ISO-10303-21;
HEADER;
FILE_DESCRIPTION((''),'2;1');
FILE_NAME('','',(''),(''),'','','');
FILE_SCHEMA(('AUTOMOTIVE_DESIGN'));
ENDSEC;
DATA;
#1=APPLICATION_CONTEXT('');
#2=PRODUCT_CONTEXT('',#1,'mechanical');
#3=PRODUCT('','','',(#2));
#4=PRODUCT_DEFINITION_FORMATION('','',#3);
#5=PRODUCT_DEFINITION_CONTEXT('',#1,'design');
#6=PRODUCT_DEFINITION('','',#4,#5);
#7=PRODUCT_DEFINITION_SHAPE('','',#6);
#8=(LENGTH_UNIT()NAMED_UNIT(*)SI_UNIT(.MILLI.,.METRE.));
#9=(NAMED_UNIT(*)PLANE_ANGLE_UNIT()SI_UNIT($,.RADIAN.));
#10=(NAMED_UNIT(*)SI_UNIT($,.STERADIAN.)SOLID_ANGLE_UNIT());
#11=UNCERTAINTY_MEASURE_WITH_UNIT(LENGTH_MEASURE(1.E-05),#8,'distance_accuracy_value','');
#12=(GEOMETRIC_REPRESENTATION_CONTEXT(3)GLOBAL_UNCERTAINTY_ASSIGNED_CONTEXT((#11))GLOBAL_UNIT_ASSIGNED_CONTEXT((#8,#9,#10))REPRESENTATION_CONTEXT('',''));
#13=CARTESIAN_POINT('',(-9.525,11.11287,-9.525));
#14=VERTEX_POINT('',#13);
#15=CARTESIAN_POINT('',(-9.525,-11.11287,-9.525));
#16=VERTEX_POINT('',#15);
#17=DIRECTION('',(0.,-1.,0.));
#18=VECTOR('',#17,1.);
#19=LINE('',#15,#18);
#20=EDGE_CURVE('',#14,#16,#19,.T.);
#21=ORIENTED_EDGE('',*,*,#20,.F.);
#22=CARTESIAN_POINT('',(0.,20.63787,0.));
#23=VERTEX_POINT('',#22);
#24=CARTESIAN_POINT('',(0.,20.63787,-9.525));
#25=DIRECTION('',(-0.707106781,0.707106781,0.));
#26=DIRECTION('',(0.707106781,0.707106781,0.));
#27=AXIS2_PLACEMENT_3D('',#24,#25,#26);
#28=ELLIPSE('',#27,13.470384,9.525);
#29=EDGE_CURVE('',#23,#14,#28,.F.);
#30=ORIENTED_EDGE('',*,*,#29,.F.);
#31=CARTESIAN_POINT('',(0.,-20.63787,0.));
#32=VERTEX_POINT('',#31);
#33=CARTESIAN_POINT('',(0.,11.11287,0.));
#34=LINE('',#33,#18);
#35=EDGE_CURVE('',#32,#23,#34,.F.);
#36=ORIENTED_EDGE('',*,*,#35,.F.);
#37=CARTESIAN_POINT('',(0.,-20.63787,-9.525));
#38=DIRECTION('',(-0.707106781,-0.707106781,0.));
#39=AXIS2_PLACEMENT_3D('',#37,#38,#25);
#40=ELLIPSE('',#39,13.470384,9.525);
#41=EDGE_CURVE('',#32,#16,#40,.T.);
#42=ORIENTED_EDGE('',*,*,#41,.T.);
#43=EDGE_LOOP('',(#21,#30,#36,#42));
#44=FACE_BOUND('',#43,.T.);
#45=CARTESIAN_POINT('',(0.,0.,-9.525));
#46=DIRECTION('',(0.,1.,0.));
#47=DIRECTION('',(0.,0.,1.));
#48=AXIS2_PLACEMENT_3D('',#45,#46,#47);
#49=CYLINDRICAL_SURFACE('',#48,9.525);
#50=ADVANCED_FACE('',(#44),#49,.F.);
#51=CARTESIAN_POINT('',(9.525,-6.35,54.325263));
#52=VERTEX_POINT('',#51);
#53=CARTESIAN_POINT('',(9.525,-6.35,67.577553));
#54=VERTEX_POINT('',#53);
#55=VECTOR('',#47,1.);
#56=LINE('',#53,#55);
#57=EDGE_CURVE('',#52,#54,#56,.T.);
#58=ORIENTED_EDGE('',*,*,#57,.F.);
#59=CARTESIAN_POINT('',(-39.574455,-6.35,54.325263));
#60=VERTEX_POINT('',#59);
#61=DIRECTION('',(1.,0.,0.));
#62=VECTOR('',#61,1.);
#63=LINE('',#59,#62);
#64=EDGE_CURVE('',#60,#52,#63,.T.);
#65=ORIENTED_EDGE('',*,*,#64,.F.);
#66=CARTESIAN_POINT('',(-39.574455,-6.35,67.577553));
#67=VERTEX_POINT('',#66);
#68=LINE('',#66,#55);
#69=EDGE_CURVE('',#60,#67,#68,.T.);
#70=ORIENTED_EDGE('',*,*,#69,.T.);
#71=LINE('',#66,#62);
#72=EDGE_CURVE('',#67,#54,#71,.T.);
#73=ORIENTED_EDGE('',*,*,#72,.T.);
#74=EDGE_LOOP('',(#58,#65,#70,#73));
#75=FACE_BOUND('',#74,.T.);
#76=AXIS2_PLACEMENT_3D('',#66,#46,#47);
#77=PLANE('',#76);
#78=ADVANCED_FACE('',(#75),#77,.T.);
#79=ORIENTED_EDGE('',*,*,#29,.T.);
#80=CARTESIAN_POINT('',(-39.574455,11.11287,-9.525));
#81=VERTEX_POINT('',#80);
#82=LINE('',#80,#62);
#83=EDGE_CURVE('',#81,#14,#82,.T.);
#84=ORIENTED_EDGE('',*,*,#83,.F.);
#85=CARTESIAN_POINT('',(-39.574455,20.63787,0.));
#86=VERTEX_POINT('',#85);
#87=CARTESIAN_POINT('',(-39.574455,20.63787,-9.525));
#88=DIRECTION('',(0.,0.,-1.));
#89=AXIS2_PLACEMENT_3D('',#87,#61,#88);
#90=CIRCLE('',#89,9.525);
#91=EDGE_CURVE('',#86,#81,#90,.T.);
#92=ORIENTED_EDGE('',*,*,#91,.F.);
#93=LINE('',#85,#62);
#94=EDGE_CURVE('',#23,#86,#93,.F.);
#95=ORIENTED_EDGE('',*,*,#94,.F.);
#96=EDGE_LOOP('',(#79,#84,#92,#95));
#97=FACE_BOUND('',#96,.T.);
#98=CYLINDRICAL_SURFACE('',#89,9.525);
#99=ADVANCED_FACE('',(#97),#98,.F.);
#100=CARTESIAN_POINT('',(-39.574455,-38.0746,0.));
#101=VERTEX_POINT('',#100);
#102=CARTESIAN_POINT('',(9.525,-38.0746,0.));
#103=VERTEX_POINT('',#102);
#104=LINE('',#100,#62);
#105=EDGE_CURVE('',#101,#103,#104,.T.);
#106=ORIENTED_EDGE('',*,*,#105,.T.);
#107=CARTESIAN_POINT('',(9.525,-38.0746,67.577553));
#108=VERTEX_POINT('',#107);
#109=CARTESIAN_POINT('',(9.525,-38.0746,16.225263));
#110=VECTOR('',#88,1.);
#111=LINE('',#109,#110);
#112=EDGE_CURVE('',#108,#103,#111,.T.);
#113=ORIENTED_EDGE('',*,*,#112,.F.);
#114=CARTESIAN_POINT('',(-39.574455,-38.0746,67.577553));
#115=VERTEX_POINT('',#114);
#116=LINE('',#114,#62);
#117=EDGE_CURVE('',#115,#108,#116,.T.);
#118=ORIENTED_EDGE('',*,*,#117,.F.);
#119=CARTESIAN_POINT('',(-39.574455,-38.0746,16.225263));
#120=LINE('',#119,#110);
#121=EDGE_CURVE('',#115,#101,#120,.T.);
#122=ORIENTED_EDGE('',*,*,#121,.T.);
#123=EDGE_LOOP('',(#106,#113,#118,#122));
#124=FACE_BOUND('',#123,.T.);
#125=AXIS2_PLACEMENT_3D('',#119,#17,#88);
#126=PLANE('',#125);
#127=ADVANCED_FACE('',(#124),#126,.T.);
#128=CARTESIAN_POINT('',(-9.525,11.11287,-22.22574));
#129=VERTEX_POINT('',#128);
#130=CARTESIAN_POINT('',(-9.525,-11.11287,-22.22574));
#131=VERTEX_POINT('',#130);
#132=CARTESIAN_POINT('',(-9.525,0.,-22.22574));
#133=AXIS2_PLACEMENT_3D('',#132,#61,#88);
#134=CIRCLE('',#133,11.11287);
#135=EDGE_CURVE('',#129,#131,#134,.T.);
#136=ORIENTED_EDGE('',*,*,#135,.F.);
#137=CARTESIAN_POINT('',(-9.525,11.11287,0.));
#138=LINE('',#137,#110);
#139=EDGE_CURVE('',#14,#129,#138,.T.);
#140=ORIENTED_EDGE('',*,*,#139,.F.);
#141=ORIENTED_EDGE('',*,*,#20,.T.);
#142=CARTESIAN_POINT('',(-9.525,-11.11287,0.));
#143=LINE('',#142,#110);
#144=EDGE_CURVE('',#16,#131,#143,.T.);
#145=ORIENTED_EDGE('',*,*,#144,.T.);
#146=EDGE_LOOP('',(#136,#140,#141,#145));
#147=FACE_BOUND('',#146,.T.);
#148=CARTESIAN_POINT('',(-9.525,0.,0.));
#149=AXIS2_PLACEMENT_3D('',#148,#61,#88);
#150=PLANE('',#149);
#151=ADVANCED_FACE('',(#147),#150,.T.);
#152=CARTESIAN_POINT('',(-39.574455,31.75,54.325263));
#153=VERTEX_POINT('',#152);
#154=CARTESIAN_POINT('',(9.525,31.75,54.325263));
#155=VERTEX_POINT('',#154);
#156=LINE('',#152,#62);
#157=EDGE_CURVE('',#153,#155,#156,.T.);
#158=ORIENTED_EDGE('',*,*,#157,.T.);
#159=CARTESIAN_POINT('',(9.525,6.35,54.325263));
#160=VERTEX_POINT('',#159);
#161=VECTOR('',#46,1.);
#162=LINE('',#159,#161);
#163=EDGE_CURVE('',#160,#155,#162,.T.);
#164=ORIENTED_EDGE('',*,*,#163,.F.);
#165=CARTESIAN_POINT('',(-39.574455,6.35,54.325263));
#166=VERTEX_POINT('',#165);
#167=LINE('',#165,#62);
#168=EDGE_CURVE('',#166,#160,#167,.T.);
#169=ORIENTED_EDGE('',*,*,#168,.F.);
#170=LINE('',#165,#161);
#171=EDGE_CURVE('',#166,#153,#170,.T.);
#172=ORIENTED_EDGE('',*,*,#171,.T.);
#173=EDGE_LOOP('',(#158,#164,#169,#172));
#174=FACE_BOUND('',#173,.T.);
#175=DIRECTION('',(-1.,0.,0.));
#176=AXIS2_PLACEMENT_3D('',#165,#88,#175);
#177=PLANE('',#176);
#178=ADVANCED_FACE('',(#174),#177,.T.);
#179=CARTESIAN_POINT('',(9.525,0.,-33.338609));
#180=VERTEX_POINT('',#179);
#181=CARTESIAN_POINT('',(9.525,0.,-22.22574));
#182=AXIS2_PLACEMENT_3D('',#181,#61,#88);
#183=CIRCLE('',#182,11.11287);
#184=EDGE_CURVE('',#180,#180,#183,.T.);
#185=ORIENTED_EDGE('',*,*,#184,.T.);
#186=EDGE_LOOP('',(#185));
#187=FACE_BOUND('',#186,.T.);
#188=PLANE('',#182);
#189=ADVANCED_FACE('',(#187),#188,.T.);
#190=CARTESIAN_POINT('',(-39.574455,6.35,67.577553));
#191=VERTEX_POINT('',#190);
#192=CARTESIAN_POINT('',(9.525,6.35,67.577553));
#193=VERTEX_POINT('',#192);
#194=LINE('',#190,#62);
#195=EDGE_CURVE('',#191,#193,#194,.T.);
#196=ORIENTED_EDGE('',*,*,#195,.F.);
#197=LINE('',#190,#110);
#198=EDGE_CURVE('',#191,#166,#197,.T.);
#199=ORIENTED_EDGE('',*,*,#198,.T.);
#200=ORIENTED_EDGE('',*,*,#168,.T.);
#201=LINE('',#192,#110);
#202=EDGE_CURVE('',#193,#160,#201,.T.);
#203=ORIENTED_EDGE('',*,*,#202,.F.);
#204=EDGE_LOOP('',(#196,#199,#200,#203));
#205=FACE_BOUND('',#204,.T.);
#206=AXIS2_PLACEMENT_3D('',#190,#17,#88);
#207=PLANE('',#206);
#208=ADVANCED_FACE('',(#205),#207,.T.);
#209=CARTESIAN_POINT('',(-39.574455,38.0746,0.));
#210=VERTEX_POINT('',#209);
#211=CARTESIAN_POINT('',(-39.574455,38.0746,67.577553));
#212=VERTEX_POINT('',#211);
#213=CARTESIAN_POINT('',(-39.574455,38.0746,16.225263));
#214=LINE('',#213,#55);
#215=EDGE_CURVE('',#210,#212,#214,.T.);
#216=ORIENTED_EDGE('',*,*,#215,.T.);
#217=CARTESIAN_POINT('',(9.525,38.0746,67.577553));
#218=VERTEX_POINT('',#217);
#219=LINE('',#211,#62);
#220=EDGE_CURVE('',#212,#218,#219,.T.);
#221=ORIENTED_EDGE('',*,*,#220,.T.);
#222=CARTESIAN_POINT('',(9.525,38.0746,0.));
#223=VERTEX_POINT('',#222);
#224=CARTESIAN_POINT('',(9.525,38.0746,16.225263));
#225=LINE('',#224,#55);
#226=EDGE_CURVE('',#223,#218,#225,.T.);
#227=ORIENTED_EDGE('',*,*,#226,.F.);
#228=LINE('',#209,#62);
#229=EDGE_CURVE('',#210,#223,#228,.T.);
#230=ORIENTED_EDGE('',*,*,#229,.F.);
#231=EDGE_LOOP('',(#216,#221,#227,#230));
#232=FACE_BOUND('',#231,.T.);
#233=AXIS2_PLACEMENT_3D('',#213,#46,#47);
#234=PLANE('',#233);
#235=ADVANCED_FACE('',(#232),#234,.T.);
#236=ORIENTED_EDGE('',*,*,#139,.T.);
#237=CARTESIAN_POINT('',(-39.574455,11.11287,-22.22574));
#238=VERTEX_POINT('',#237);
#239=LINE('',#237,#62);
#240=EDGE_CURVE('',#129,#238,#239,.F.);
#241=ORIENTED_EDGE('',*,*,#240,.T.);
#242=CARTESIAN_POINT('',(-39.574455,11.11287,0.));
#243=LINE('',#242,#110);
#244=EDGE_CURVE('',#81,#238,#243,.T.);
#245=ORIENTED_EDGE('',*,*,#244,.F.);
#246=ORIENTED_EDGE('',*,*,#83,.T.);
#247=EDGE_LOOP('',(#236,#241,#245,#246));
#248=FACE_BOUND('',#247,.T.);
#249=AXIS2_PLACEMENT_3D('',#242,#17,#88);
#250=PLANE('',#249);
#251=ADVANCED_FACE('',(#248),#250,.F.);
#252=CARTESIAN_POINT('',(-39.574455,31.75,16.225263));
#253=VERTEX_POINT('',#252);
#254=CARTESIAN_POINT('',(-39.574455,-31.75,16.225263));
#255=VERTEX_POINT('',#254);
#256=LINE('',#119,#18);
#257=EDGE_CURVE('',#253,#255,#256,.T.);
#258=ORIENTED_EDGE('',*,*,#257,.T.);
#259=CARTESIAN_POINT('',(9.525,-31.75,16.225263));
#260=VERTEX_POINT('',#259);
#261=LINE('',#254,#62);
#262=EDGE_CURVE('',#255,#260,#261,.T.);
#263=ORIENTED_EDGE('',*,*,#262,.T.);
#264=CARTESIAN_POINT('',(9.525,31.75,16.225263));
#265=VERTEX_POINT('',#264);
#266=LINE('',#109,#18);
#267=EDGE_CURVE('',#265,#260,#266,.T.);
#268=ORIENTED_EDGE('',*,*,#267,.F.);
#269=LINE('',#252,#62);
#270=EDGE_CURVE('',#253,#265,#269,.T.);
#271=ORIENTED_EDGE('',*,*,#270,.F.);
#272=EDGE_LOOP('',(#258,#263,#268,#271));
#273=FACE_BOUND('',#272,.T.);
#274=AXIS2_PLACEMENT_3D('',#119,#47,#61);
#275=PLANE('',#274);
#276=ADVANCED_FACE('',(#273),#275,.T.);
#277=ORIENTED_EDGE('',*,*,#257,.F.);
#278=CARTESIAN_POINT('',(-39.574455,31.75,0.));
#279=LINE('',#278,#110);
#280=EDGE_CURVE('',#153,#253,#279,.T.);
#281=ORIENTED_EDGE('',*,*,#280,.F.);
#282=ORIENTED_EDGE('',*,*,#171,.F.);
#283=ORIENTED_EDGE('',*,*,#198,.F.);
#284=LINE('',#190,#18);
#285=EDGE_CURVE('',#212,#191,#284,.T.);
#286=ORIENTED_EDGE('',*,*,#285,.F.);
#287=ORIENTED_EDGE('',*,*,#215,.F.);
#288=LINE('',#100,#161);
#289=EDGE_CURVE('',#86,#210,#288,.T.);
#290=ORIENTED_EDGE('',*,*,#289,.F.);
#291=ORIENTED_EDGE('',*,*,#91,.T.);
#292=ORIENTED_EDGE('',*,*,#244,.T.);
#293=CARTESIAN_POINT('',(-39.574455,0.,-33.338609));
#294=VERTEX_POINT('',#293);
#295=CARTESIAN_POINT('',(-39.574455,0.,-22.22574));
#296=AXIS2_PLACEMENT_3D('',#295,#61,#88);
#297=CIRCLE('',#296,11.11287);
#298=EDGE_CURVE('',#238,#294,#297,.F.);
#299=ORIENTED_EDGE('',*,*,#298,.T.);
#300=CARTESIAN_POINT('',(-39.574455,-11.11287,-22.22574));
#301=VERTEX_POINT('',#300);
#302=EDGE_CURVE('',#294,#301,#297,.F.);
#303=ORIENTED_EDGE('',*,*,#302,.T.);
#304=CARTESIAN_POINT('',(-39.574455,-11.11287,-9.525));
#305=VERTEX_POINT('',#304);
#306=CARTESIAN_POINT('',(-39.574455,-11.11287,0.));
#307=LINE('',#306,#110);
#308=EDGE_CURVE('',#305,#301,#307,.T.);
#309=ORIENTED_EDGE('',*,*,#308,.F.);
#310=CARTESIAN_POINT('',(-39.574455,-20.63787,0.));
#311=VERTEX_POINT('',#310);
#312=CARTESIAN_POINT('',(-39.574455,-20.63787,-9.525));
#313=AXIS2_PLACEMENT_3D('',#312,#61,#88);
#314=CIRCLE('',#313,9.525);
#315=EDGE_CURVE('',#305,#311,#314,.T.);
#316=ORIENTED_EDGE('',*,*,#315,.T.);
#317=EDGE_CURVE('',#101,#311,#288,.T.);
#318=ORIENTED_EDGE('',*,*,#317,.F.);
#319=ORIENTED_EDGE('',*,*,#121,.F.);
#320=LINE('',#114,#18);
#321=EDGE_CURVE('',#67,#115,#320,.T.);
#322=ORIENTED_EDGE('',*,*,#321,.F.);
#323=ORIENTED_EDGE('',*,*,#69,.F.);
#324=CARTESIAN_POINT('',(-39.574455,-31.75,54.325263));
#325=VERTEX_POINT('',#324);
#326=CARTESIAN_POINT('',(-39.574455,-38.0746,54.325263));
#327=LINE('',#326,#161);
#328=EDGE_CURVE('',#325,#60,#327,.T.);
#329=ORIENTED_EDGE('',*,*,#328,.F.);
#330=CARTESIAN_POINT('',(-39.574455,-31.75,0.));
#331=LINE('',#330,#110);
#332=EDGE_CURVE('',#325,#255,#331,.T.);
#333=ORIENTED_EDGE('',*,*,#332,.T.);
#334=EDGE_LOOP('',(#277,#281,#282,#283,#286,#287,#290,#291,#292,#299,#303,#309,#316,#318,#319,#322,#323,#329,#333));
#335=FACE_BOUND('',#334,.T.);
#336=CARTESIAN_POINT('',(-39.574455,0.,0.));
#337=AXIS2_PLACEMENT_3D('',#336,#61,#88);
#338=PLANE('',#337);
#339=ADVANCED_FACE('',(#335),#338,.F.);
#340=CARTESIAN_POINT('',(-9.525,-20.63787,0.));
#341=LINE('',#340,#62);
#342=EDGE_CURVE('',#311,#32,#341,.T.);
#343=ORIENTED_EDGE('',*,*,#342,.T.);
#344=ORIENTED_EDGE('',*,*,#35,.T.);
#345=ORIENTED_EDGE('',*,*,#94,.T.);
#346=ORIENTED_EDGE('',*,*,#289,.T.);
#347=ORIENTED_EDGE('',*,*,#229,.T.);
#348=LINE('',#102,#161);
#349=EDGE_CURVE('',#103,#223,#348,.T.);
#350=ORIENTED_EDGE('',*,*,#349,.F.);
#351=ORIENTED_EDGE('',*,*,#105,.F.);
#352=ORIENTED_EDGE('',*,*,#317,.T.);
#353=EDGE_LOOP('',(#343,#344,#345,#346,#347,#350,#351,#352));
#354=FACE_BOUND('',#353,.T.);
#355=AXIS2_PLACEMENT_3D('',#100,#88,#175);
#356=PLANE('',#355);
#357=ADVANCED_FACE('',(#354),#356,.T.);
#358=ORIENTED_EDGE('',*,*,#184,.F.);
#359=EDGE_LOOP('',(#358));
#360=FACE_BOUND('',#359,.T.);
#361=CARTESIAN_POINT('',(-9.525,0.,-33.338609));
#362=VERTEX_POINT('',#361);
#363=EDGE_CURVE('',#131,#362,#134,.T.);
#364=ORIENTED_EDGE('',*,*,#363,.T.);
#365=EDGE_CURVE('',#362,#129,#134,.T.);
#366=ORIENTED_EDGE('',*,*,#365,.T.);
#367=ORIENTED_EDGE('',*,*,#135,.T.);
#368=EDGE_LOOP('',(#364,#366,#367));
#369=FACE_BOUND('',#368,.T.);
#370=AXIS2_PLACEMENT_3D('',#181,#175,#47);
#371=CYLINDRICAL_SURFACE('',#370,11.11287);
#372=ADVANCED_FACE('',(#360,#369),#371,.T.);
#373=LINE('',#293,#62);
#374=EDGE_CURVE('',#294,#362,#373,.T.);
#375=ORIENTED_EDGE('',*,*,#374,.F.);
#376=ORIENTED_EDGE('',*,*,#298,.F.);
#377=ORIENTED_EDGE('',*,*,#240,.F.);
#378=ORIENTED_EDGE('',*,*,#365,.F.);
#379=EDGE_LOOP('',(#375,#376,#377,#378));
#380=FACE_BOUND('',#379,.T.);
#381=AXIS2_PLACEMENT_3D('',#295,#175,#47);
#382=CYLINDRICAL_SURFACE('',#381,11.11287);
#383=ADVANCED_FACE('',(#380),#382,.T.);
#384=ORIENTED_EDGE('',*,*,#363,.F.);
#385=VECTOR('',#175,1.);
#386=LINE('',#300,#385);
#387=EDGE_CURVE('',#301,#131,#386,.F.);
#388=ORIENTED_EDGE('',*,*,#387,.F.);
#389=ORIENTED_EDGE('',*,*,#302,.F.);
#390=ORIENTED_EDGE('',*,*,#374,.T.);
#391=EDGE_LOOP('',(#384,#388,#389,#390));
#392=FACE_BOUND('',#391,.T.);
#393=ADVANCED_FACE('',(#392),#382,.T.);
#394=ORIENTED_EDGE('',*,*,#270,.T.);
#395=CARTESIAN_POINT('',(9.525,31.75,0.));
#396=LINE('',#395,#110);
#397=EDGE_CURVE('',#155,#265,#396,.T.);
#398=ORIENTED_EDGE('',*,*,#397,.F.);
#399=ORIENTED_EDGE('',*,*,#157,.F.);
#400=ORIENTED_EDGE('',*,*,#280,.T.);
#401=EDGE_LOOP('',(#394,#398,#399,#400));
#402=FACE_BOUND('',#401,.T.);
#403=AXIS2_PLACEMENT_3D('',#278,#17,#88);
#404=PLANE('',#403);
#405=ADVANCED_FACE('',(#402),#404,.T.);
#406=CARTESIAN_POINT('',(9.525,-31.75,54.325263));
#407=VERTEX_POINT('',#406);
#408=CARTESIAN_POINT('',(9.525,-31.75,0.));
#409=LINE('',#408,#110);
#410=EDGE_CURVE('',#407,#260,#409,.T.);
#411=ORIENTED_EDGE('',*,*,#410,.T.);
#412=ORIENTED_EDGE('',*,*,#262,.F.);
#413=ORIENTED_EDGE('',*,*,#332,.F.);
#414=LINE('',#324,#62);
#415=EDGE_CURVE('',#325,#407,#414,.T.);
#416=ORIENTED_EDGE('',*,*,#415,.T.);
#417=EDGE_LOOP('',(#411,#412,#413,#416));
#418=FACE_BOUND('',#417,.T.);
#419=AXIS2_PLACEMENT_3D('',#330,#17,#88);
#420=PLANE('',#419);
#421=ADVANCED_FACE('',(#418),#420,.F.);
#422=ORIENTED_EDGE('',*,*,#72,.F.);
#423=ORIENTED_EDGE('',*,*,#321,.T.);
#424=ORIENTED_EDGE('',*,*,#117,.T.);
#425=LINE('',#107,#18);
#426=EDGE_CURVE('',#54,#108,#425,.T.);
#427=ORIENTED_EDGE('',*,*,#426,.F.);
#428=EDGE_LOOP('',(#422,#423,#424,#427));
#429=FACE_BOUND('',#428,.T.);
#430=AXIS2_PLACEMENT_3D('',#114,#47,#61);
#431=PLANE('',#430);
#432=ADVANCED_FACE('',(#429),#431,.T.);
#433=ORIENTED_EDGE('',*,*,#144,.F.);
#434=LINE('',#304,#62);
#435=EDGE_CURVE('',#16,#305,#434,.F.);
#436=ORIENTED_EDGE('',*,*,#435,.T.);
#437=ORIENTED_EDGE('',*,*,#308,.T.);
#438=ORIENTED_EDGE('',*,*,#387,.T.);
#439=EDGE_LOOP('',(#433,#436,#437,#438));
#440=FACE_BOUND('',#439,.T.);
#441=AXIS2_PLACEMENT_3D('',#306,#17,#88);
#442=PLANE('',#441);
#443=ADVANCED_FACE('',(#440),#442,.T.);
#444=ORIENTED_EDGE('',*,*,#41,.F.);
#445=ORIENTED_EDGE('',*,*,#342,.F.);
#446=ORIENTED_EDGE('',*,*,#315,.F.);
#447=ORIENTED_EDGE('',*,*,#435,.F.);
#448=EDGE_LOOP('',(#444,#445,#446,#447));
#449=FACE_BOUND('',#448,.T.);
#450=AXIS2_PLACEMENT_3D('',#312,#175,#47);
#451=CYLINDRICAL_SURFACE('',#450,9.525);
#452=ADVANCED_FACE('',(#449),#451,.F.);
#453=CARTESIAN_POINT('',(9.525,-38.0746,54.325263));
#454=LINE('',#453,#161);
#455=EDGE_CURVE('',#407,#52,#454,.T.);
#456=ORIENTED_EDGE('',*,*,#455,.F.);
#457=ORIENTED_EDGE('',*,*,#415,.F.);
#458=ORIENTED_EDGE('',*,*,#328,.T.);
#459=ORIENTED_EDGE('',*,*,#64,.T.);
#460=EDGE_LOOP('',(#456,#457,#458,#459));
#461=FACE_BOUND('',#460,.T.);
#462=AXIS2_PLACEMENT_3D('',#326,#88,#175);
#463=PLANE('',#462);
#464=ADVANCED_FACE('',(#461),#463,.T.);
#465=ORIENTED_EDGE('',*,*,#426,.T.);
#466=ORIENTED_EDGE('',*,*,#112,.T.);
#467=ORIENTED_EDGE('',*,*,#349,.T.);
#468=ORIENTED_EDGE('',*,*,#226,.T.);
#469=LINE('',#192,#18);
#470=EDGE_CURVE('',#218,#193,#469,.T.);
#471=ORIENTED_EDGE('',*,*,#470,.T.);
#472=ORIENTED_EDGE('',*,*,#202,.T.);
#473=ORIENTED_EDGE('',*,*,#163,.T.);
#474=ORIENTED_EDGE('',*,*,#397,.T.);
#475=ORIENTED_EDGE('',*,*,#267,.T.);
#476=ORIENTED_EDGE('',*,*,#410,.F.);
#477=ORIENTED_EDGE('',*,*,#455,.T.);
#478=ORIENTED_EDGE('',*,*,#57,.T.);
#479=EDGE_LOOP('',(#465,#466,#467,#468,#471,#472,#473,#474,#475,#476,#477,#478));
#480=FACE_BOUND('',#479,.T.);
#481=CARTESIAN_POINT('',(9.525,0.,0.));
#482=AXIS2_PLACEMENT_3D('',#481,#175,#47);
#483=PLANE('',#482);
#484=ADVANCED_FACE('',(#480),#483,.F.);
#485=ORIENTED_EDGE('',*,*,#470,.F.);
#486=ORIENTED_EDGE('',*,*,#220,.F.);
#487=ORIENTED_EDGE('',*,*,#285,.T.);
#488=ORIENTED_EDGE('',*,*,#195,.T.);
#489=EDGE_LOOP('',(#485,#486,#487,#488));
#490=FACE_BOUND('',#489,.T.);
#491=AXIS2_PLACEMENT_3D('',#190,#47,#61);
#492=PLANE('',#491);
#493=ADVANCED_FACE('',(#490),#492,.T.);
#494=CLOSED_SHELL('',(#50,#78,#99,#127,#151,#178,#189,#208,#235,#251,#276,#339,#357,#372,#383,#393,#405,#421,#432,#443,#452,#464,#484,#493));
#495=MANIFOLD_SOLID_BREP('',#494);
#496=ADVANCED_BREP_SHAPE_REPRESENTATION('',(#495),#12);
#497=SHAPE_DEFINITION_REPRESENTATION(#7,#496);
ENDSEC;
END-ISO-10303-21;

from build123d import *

# Parameters (mm, degrees)
BASE_SKETCH_R      = 11.112869807
FEATURE_A_DEPTH    = 9.525
FEATURE_B_SKETCH_W = 22.225739614
FEATURE_B_SKETCH_H = 33.338609421
FEATURE_B_DEPTH    = 30.049455477
FILLET1_R          = 11.112869807
FILLET2_R          = 11.112869807
FEATURE_C_SKETCH_W = 76.1492
FEATURE_C_SKETCH_H = 16.225263269
FEATURE_C_DEPTH    = 49.099455477
FEATURE_D_SKETCH_W = 6.3246
FEATURE_D_SKETCH_H = 38.1
FEATURE_D_DEPTH    = 49.099455
FEATURE_E_SKETCH_W = 31.7246
FEATURE_E_SKETCH_H = 13.25229015
FEATURE_E_DEPTH    = 49.099455477
FILLET_BC_R        = 9.525


with BuildPart() as part:
    # Base Sketch → Feature A (new, symmetric)
    with BuildSketch(Plane.YZ):
        with Locations(Location((0, -22.225739614, 0), (0, 0, 90))):
            Circle(BASE_SKETCH_R)
    extrude(amount=FEATURE_A_DEPTH, both=True)

    # Feature B Sketch → Feature B (add)
    with BuildSketch(Plane(origin=(-9.525, 0, 0), x_dir=(0, -1, 0), z_dir=(-1, 0, 0))):
        with Locations((0, -16.669304711)):
            Rectangle(FEATURE_B_SKETCH_W, FEATURE_B_SKETCH_H)
    extrude(amount=FEATURE_B_DEPTH)

    # Fillet1
    fillet1_edges = [part.edges().sort_by_distance(p)[0] for p in [
        (-24.549727739, 11.112869807, -33.338609421),
    ]]
    fillet(fillet1_edges, radius=FILLET1_R - 0.0001)  # a hair under: the kernel refuses the full size

    # Fillet2
    fillet2_edges = [part.edges().sort_by_distance(p)[0] for p in [
        (-24.549727739, -11.112869807, -33.338609421),
    ]]
    fillet(fillet2_edges, radius=FILLET2_R)

    # Feature C Sketch → Feature C (add)
    with BuildSketch(Plane.YZ.offset(9.525)):
        with Locations((0, 8.112631635)):
            Rectangle(FEATURE_C_SKETCH_W, FEATURE_C_SKETCH_H)
    extrude(amount=-FEATURE_C_DEPTH)

    # Feature D Sketch → Feature D (add)
    with BuildSketch(Plane.YZ.offset(9.525)):
        with Locations((34.9123, 35.275263269)):
            Rectangle(FEATURE_D_SKETCH_W, FEATURE_D_SKETCH_H)
        with Locations((-34.9123, 35.275263269)):
            Rectangle(FEATURE_D_SKETCH_W, FEATURE_D_SKETCH_H)
    extrude(amount=-FEATURE_D_DEPTH)

    # Feature E Sketch → Feature E (add)
    with BuildSketch(Plane.YZ.offset(9.525)):
        with Locations((22.2123, 60.951408344)):
            Rectangle(FEATURE_E_SKETCH_W, FEATURE_E_SKETCH_H)
        with Locations((-22.2123, 60.951408344)):
            Rectangle(FEATURE_E_SKETCH_W, FEATURE_E_SKETCH_H)
    extrude(amount=-FEATURE_E_DEPTH)

    # Fillet_BC
    fillet_bc_edges = [part.edges().sort_by_distance(p)[0] for p in [
        (-9.525, 0, 0),
        (-24.549727739, -11.112869807, 0),
        (-24.549727739, 11.112869807, 0),
    ]]
    fillet(fillet_bc_edges, radius=FILLET_BC_R)


solid = part.part
